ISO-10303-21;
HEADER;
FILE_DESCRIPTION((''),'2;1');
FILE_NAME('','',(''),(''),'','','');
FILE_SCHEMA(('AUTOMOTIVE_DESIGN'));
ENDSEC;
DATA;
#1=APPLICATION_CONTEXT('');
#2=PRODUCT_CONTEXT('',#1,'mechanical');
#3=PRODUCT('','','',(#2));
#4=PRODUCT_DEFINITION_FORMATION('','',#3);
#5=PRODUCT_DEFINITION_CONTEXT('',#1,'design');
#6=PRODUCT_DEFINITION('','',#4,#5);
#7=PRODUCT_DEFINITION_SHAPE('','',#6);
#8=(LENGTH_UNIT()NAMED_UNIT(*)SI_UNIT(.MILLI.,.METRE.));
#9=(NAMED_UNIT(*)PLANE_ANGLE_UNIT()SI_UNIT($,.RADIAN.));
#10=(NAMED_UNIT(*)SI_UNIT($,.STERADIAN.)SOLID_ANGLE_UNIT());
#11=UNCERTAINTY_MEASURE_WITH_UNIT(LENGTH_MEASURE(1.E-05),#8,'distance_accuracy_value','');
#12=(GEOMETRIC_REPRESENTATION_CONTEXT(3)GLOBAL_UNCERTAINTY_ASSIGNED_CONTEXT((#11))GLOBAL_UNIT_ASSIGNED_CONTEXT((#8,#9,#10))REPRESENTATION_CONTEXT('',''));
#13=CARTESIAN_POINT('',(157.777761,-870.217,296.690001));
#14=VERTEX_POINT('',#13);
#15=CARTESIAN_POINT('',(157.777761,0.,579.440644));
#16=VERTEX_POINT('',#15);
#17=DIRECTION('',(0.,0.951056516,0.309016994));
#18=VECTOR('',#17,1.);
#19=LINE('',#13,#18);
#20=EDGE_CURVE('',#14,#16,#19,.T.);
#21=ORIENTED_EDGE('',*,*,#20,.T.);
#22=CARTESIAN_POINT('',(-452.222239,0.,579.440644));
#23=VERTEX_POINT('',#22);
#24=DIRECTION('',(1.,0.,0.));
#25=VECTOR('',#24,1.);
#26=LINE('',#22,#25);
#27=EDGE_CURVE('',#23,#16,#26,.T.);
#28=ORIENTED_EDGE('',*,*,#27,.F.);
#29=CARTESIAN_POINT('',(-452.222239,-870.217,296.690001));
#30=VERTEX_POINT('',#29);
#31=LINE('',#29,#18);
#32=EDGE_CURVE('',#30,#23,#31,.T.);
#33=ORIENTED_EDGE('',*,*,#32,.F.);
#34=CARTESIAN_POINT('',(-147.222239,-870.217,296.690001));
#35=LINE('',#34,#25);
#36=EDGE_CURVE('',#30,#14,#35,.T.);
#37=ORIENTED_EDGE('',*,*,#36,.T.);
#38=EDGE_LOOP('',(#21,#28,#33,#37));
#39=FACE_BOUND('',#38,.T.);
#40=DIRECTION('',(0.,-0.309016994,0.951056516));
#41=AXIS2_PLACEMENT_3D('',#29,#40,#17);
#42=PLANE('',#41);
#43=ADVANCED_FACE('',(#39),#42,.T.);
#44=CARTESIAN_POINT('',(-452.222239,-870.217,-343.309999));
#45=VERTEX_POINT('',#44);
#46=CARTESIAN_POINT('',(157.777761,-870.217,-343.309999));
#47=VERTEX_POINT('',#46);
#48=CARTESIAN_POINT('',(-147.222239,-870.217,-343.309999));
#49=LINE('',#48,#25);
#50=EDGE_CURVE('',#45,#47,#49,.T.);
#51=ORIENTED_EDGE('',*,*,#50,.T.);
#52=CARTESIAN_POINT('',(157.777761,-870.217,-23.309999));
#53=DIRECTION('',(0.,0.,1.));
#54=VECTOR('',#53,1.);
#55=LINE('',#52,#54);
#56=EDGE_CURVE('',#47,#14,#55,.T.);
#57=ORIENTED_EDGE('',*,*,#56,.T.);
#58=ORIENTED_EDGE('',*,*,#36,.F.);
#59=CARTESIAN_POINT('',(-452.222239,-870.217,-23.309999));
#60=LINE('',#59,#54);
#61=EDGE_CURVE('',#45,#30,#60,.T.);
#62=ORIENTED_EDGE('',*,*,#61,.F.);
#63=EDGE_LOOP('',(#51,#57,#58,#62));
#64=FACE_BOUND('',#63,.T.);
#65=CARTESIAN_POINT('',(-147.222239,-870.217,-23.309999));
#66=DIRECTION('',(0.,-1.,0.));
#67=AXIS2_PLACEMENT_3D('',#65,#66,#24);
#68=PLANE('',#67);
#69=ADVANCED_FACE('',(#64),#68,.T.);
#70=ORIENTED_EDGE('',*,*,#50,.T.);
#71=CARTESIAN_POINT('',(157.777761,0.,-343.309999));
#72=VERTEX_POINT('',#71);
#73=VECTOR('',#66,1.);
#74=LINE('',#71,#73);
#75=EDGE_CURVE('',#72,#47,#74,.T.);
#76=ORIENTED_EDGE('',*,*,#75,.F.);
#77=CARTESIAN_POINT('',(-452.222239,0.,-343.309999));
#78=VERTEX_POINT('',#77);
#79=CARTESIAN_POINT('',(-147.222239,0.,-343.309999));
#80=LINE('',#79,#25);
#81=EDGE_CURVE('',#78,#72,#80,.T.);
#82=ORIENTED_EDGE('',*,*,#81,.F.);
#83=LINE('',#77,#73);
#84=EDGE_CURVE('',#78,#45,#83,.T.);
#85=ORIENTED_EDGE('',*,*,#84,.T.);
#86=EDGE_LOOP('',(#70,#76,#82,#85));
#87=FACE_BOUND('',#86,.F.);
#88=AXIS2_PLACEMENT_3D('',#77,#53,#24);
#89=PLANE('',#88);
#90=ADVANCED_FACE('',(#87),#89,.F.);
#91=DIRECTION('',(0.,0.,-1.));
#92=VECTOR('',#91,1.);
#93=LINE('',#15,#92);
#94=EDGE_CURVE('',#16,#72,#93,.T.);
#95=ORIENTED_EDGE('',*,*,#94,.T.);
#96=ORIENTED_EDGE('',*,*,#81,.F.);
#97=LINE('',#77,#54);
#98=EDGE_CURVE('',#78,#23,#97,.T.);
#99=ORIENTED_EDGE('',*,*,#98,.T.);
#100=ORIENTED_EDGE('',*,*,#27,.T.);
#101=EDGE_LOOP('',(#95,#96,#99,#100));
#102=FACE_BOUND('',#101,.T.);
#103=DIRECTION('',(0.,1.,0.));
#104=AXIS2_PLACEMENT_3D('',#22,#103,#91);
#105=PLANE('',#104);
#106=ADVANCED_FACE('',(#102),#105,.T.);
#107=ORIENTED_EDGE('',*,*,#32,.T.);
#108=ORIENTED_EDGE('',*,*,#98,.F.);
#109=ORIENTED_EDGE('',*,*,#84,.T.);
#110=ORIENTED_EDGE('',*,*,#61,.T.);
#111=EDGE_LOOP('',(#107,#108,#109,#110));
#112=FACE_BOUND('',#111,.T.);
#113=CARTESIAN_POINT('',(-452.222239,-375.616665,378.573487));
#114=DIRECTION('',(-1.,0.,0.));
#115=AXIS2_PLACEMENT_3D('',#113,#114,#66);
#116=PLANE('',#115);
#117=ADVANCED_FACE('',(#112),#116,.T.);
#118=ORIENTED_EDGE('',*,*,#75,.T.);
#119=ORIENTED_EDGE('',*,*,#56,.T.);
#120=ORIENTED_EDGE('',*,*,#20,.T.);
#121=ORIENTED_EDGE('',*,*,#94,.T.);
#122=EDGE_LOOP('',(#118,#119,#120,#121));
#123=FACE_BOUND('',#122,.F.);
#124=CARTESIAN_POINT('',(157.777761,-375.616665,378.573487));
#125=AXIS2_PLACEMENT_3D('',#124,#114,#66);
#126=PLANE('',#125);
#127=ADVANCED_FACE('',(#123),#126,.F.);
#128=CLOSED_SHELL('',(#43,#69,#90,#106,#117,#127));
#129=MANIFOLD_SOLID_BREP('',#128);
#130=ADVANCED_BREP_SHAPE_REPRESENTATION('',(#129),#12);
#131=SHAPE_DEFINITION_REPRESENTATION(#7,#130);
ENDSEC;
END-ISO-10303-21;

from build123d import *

# Parameters (mm, degrees)
F0_W     = 610
F0_H     = 640
F1_DEPTH = 870.217
F3_DEPTH = 610


# Not quite as in the source:
# - a feature names something its author has since deleted; it is built from what else it names


with BuildPart() as f1:
    # F0 (on Front) → F1 (new body)
    with BuildSketch(Plane.XZ):
        with Locations((-147.2222385816, -23.3099991456)):
            Rectangle(F0_W, F0_H)
    extrude(amount=F1_DEPTH)

    # F2 (on face) → F3 (join)
    with BuildSketch(Plane(origin=(-452.2222385816, 0, 0), x_dir=(0, -1, 0), z_dir=(-1, 0, 0))):
        Polygon((0, 296.6900008544), (870.217, 296.6900008544), (0, 579.4406441511), align=None)
    extrude(amount=-F3_DEPTH)


solid = f1.part
